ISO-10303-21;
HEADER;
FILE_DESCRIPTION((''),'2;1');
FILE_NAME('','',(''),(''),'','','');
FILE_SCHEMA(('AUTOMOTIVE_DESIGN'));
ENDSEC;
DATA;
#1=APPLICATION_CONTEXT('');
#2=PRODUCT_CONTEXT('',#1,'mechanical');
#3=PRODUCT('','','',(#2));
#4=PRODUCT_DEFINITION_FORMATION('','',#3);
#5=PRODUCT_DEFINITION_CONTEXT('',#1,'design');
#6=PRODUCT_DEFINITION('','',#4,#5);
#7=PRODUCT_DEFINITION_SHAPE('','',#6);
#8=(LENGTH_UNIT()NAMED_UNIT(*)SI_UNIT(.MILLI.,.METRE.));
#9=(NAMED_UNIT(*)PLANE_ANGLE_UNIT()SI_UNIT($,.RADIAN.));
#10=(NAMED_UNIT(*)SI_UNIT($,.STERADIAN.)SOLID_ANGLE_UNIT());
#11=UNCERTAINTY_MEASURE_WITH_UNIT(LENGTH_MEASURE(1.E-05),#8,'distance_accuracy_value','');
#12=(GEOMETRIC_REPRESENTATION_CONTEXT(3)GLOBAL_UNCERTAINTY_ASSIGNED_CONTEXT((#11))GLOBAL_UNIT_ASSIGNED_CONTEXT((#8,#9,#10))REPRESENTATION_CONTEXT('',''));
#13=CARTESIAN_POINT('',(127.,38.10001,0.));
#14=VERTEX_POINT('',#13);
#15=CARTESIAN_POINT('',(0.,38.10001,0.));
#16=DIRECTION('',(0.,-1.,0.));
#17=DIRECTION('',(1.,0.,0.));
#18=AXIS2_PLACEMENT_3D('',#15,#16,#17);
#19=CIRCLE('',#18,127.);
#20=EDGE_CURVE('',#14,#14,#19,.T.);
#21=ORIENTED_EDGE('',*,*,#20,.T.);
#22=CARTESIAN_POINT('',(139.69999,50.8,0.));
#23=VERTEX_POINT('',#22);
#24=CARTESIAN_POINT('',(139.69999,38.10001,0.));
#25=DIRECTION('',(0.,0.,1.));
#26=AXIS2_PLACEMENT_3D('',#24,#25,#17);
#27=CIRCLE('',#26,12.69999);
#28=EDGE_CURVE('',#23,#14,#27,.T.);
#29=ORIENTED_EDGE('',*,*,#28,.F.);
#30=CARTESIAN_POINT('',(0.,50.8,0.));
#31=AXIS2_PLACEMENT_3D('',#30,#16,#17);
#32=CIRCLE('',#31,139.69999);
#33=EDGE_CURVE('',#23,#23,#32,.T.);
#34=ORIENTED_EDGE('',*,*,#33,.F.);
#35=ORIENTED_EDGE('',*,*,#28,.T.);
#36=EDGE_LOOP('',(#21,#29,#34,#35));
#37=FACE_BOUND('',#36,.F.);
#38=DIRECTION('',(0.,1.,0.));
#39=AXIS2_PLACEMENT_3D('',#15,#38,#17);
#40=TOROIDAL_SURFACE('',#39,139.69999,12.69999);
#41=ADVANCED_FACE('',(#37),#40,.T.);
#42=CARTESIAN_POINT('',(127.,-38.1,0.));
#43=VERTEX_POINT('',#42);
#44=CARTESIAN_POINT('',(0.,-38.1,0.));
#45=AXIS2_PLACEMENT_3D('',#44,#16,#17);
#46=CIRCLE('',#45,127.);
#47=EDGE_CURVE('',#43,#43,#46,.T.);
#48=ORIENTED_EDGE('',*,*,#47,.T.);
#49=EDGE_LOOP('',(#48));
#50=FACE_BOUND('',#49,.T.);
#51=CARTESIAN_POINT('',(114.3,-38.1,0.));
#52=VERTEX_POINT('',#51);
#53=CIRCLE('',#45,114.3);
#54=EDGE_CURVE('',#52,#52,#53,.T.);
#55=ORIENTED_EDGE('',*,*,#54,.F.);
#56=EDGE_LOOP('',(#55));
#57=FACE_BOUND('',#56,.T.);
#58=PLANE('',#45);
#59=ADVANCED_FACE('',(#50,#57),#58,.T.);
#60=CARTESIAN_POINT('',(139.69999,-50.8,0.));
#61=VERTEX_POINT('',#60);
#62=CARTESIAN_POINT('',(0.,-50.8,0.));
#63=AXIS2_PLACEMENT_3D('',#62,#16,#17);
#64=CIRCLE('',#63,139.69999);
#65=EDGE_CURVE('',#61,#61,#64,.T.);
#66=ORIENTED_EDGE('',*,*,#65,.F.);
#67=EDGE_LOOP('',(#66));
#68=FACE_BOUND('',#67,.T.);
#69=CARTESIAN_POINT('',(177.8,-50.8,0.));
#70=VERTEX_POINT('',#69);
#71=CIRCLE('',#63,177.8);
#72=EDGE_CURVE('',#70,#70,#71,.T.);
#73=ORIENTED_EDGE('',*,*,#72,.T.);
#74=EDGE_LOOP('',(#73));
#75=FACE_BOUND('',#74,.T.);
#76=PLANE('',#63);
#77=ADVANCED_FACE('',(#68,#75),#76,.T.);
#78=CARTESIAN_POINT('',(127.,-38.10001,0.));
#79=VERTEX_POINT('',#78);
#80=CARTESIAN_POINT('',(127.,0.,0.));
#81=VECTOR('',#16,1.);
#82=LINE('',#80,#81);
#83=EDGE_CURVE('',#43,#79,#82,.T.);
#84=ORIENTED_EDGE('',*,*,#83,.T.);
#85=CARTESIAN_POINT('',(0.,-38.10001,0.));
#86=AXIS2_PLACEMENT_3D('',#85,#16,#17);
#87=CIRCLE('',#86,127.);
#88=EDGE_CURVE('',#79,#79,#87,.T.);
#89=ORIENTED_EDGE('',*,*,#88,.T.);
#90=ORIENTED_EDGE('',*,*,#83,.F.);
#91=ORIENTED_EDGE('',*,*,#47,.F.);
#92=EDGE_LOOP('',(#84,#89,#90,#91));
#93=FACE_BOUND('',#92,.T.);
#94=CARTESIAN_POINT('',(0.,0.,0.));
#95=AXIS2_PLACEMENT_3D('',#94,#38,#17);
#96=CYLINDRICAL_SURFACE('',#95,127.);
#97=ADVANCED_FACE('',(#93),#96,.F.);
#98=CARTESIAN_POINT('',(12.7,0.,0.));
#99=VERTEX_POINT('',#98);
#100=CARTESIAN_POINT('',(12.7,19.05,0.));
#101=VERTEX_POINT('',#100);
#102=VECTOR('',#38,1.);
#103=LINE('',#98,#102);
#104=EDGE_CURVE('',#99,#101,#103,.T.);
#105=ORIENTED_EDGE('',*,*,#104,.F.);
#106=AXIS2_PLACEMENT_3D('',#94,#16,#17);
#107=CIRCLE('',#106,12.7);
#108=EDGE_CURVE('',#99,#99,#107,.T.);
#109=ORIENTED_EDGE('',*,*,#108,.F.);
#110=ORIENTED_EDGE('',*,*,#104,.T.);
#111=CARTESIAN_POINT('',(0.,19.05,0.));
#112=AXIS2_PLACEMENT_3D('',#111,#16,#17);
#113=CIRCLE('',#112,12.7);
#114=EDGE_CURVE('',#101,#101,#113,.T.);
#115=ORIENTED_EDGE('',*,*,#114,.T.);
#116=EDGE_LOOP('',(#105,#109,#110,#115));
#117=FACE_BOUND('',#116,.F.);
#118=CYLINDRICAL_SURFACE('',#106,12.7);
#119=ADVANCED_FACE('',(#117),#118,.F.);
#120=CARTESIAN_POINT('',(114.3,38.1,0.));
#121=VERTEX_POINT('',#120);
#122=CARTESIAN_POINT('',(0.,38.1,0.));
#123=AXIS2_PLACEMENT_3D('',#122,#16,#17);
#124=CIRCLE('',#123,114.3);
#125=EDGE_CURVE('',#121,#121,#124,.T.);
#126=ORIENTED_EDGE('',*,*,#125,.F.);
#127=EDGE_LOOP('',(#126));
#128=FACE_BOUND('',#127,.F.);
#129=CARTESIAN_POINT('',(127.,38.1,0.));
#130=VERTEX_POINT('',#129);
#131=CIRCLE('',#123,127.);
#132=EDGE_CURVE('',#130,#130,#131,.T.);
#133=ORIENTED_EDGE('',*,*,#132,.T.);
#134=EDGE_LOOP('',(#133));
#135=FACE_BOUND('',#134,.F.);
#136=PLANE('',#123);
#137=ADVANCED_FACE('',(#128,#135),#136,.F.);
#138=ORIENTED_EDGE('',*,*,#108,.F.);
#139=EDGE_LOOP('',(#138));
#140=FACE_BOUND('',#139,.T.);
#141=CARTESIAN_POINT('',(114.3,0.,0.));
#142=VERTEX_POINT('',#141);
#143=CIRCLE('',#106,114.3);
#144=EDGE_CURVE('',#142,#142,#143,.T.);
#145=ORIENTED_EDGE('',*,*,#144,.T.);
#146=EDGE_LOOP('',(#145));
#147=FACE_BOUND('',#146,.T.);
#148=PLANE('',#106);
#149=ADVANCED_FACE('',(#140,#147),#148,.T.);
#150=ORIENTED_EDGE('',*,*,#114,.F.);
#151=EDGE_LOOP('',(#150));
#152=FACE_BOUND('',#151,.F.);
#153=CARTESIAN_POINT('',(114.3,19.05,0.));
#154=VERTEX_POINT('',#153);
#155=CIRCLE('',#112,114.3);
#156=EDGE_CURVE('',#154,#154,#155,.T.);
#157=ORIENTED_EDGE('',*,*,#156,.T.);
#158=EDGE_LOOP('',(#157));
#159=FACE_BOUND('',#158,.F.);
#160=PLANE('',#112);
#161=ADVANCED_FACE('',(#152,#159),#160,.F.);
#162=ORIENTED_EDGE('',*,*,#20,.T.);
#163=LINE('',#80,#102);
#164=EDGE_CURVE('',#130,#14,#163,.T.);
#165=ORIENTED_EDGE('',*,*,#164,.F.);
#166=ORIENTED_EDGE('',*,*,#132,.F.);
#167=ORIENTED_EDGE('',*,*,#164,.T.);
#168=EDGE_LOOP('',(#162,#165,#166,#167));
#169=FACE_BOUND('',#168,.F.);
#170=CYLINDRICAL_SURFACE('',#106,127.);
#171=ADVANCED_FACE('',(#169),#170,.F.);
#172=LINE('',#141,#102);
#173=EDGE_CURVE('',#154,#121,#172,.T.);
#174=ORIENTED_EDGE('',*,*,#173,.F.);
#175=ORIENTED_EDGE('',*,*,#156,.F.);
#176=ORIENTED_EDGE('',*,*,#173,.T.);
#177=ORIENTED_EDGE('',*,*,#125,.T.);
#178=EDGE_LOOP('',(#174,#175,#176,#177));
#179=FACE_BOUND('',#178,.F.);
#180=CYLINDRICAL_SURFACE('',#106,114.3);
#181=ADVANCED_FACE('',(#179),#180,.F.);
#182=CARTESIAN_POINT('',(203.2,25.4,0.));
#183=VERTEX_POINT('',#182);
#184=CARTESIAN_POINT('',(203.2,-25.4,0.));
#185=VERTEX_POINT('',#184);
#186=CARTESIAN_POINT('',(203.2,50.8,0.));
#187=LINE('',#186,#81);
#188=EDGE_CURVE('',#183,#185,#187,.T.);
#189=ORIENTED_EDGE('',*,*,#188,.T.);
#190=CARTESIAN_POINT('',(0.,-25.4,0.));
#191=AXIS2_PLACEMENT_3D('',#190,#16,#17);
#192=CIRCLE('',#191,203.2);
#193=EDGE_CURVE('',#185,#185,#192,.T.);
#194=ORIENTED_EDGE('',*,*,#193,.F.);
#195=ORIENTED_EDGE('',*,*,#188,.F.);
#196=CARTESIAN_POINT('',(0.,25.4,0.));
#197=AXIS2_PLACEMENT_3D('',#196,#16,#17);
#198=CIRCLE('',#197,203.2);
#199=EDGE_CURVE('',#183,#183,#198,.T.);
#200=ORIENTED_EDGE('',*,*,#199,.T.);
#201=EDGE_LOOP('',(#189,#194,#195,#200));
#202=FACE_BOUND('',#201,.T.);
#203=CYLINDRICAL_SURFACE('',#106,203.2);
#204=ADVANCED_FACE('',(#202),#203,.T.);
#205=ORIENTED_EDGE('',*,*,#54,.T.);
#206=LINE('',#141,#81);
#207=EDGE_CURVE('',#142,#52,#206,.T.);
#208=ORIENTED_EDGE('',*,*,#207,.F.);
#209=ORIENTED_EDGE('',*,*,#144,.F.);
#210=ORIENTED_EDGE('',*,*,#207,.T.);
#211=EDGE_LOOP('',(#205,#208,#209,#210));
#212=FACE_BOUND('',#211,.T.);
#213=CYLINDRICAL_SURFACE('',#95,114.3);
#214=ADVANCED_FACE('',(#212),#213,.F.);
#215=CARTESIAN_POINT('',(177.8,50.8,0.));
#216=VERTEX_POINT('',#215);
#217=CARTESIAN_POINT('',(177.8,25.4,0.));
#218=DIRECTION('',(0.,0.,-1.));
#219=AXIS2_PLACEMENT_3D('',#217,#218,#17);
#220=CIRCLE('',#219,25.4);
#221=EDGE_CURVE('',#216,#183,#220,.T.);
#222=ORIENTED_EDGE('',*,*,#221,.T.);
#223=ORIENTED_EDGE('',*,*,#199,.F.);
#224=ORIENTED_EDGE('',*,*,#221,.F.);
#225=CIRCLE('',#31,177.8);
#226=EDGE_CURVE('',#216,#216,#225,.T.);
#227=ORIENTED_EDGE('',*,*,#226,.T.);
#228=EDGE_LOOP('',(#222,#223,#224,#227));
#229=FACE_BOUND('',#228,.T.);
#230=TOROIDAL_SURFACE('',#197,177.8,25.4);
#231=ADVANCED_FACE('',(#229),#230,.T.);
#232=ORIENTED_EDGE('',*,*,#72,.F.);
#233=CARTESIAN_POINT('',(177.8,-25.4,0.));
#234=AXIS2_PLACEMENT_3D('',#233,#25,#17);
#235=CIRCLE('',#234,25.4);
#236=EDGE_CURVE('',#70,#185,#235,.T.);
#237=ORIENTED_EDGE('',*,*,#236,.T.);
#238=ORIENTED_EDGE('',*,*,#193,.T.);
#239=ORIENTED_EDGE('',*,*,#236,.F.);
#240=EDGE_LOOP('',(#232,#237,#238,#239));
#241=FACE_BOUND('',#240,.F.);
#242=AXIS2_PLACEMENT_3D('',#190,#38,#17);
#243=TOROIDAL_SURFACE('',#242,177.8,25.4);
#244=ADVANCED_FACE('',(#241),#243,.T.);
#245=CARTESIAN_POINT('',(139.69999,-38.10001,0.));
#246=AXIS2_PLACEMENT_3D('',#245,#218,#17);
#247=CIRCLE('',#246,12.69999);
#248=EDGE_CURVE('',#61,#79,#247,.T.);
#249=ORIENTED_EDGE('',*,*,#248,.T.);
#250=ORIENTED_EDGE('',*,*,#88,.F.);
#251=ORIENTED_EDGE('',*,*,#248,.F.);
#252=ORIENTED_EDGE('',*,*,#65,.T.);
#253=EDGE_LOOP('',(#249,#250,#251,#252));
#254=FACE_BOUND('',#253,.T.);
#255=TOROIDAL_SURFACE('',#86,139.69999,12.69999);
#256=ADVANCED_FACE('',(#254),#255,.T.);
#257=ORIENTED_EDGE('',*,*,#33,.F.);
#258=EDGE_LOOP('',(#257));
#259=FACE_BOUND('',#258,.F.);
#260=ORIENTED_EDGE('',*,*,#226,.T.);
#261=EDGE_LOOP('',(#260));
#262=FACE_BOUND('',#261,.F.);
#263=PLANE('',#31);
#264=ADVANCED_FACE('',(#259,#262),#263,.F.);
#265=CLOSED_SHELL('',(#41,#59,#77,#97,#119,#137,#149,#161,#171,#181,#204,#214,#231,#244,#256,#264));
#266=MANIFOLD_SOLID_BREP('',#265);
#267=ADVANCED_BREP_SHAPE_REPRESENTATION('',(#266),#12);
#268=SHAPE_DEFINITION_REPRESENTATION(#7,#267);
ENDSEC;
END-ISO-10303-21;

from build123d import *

# Parameters (mm, degrees)
F0_R     = 203.2
F0_R_2   = 127
F1_DEPTH = 50.8
F2_DEPTH = 50.8
F0_R_3   = 114.3
F3_DEPTH = 38.1
F4_DEPTH = 38.1
F5_R     = 25.4
F6_R     = 12.69999
F0_R_4   = 12.7
F7_DEPTH = 19.05


# Not quite as in the source:
# - a fillet or chamfer is up to 0.001 mm smaller than in the source, because OpenCascade refuses the exact size


with BuildPart() as f1:
    # F0 (on Front) → F1 (new body)
    with BuildSketch(Plane.XZ):
        Circle(F0_R)
        Circle(F0_R_2, mode=Mode.SUBTRACT)
    extrude(amount=F1_DEPTH)

    # F0 (on Front) → F2 (join)
    with BuildSketch(Plane.XZ):
        Circle(F0_R)
        Circle(F0_R_2, mode=Mode.SUBTRACT)
    extrude(amount=-F2_DEPTH)

    # F0 (on Front) → F3 (join)
    with BuildSketch(Plane.XZ):
        Circle(F0_R_2)
        Circle(F0_R_3, mode=Mode.SUBTRACT)
    extrude(amount=F3_DEPTH)

    # F0 (on Front) → F4 (join)
    with BuildSketch(Plane.XZ):
        Circle(F0_R_2)
        Circle(F0_R_3, mode=Mode.SUBTRACT)
    extrude(amount=-F4_DEPTH)

    # F5
    f5_edges = [f1.edges().sort_by_distance(p)[0] for p in [
        (-203.2, -50.8, 0),
        (-203.2, 50.8, 0),
    ]]
    fillet(f5_edges, radius=F5_R)

    # F6 (radius 12.7 in the source; OpenCascade refuses exactly that, so slightly less here)
    f6_edges = [f1.edges().sort_by_distance(p)[0] for p in [
        (-127, -50.8, 0),
        (-127, 50.8, 0),
    ]]
    fillet(f6_edges, radius=F6_R)

    # F0 (on Front) → F7 (join)
    with BuildSketch(Plane.XZ):
        Circle(F0_R_3)
        Circle(F0_R_4, mode=Mode.SUBTRACT)
    extrude(amount=-F7_DEPTH)


solid = f1.part
